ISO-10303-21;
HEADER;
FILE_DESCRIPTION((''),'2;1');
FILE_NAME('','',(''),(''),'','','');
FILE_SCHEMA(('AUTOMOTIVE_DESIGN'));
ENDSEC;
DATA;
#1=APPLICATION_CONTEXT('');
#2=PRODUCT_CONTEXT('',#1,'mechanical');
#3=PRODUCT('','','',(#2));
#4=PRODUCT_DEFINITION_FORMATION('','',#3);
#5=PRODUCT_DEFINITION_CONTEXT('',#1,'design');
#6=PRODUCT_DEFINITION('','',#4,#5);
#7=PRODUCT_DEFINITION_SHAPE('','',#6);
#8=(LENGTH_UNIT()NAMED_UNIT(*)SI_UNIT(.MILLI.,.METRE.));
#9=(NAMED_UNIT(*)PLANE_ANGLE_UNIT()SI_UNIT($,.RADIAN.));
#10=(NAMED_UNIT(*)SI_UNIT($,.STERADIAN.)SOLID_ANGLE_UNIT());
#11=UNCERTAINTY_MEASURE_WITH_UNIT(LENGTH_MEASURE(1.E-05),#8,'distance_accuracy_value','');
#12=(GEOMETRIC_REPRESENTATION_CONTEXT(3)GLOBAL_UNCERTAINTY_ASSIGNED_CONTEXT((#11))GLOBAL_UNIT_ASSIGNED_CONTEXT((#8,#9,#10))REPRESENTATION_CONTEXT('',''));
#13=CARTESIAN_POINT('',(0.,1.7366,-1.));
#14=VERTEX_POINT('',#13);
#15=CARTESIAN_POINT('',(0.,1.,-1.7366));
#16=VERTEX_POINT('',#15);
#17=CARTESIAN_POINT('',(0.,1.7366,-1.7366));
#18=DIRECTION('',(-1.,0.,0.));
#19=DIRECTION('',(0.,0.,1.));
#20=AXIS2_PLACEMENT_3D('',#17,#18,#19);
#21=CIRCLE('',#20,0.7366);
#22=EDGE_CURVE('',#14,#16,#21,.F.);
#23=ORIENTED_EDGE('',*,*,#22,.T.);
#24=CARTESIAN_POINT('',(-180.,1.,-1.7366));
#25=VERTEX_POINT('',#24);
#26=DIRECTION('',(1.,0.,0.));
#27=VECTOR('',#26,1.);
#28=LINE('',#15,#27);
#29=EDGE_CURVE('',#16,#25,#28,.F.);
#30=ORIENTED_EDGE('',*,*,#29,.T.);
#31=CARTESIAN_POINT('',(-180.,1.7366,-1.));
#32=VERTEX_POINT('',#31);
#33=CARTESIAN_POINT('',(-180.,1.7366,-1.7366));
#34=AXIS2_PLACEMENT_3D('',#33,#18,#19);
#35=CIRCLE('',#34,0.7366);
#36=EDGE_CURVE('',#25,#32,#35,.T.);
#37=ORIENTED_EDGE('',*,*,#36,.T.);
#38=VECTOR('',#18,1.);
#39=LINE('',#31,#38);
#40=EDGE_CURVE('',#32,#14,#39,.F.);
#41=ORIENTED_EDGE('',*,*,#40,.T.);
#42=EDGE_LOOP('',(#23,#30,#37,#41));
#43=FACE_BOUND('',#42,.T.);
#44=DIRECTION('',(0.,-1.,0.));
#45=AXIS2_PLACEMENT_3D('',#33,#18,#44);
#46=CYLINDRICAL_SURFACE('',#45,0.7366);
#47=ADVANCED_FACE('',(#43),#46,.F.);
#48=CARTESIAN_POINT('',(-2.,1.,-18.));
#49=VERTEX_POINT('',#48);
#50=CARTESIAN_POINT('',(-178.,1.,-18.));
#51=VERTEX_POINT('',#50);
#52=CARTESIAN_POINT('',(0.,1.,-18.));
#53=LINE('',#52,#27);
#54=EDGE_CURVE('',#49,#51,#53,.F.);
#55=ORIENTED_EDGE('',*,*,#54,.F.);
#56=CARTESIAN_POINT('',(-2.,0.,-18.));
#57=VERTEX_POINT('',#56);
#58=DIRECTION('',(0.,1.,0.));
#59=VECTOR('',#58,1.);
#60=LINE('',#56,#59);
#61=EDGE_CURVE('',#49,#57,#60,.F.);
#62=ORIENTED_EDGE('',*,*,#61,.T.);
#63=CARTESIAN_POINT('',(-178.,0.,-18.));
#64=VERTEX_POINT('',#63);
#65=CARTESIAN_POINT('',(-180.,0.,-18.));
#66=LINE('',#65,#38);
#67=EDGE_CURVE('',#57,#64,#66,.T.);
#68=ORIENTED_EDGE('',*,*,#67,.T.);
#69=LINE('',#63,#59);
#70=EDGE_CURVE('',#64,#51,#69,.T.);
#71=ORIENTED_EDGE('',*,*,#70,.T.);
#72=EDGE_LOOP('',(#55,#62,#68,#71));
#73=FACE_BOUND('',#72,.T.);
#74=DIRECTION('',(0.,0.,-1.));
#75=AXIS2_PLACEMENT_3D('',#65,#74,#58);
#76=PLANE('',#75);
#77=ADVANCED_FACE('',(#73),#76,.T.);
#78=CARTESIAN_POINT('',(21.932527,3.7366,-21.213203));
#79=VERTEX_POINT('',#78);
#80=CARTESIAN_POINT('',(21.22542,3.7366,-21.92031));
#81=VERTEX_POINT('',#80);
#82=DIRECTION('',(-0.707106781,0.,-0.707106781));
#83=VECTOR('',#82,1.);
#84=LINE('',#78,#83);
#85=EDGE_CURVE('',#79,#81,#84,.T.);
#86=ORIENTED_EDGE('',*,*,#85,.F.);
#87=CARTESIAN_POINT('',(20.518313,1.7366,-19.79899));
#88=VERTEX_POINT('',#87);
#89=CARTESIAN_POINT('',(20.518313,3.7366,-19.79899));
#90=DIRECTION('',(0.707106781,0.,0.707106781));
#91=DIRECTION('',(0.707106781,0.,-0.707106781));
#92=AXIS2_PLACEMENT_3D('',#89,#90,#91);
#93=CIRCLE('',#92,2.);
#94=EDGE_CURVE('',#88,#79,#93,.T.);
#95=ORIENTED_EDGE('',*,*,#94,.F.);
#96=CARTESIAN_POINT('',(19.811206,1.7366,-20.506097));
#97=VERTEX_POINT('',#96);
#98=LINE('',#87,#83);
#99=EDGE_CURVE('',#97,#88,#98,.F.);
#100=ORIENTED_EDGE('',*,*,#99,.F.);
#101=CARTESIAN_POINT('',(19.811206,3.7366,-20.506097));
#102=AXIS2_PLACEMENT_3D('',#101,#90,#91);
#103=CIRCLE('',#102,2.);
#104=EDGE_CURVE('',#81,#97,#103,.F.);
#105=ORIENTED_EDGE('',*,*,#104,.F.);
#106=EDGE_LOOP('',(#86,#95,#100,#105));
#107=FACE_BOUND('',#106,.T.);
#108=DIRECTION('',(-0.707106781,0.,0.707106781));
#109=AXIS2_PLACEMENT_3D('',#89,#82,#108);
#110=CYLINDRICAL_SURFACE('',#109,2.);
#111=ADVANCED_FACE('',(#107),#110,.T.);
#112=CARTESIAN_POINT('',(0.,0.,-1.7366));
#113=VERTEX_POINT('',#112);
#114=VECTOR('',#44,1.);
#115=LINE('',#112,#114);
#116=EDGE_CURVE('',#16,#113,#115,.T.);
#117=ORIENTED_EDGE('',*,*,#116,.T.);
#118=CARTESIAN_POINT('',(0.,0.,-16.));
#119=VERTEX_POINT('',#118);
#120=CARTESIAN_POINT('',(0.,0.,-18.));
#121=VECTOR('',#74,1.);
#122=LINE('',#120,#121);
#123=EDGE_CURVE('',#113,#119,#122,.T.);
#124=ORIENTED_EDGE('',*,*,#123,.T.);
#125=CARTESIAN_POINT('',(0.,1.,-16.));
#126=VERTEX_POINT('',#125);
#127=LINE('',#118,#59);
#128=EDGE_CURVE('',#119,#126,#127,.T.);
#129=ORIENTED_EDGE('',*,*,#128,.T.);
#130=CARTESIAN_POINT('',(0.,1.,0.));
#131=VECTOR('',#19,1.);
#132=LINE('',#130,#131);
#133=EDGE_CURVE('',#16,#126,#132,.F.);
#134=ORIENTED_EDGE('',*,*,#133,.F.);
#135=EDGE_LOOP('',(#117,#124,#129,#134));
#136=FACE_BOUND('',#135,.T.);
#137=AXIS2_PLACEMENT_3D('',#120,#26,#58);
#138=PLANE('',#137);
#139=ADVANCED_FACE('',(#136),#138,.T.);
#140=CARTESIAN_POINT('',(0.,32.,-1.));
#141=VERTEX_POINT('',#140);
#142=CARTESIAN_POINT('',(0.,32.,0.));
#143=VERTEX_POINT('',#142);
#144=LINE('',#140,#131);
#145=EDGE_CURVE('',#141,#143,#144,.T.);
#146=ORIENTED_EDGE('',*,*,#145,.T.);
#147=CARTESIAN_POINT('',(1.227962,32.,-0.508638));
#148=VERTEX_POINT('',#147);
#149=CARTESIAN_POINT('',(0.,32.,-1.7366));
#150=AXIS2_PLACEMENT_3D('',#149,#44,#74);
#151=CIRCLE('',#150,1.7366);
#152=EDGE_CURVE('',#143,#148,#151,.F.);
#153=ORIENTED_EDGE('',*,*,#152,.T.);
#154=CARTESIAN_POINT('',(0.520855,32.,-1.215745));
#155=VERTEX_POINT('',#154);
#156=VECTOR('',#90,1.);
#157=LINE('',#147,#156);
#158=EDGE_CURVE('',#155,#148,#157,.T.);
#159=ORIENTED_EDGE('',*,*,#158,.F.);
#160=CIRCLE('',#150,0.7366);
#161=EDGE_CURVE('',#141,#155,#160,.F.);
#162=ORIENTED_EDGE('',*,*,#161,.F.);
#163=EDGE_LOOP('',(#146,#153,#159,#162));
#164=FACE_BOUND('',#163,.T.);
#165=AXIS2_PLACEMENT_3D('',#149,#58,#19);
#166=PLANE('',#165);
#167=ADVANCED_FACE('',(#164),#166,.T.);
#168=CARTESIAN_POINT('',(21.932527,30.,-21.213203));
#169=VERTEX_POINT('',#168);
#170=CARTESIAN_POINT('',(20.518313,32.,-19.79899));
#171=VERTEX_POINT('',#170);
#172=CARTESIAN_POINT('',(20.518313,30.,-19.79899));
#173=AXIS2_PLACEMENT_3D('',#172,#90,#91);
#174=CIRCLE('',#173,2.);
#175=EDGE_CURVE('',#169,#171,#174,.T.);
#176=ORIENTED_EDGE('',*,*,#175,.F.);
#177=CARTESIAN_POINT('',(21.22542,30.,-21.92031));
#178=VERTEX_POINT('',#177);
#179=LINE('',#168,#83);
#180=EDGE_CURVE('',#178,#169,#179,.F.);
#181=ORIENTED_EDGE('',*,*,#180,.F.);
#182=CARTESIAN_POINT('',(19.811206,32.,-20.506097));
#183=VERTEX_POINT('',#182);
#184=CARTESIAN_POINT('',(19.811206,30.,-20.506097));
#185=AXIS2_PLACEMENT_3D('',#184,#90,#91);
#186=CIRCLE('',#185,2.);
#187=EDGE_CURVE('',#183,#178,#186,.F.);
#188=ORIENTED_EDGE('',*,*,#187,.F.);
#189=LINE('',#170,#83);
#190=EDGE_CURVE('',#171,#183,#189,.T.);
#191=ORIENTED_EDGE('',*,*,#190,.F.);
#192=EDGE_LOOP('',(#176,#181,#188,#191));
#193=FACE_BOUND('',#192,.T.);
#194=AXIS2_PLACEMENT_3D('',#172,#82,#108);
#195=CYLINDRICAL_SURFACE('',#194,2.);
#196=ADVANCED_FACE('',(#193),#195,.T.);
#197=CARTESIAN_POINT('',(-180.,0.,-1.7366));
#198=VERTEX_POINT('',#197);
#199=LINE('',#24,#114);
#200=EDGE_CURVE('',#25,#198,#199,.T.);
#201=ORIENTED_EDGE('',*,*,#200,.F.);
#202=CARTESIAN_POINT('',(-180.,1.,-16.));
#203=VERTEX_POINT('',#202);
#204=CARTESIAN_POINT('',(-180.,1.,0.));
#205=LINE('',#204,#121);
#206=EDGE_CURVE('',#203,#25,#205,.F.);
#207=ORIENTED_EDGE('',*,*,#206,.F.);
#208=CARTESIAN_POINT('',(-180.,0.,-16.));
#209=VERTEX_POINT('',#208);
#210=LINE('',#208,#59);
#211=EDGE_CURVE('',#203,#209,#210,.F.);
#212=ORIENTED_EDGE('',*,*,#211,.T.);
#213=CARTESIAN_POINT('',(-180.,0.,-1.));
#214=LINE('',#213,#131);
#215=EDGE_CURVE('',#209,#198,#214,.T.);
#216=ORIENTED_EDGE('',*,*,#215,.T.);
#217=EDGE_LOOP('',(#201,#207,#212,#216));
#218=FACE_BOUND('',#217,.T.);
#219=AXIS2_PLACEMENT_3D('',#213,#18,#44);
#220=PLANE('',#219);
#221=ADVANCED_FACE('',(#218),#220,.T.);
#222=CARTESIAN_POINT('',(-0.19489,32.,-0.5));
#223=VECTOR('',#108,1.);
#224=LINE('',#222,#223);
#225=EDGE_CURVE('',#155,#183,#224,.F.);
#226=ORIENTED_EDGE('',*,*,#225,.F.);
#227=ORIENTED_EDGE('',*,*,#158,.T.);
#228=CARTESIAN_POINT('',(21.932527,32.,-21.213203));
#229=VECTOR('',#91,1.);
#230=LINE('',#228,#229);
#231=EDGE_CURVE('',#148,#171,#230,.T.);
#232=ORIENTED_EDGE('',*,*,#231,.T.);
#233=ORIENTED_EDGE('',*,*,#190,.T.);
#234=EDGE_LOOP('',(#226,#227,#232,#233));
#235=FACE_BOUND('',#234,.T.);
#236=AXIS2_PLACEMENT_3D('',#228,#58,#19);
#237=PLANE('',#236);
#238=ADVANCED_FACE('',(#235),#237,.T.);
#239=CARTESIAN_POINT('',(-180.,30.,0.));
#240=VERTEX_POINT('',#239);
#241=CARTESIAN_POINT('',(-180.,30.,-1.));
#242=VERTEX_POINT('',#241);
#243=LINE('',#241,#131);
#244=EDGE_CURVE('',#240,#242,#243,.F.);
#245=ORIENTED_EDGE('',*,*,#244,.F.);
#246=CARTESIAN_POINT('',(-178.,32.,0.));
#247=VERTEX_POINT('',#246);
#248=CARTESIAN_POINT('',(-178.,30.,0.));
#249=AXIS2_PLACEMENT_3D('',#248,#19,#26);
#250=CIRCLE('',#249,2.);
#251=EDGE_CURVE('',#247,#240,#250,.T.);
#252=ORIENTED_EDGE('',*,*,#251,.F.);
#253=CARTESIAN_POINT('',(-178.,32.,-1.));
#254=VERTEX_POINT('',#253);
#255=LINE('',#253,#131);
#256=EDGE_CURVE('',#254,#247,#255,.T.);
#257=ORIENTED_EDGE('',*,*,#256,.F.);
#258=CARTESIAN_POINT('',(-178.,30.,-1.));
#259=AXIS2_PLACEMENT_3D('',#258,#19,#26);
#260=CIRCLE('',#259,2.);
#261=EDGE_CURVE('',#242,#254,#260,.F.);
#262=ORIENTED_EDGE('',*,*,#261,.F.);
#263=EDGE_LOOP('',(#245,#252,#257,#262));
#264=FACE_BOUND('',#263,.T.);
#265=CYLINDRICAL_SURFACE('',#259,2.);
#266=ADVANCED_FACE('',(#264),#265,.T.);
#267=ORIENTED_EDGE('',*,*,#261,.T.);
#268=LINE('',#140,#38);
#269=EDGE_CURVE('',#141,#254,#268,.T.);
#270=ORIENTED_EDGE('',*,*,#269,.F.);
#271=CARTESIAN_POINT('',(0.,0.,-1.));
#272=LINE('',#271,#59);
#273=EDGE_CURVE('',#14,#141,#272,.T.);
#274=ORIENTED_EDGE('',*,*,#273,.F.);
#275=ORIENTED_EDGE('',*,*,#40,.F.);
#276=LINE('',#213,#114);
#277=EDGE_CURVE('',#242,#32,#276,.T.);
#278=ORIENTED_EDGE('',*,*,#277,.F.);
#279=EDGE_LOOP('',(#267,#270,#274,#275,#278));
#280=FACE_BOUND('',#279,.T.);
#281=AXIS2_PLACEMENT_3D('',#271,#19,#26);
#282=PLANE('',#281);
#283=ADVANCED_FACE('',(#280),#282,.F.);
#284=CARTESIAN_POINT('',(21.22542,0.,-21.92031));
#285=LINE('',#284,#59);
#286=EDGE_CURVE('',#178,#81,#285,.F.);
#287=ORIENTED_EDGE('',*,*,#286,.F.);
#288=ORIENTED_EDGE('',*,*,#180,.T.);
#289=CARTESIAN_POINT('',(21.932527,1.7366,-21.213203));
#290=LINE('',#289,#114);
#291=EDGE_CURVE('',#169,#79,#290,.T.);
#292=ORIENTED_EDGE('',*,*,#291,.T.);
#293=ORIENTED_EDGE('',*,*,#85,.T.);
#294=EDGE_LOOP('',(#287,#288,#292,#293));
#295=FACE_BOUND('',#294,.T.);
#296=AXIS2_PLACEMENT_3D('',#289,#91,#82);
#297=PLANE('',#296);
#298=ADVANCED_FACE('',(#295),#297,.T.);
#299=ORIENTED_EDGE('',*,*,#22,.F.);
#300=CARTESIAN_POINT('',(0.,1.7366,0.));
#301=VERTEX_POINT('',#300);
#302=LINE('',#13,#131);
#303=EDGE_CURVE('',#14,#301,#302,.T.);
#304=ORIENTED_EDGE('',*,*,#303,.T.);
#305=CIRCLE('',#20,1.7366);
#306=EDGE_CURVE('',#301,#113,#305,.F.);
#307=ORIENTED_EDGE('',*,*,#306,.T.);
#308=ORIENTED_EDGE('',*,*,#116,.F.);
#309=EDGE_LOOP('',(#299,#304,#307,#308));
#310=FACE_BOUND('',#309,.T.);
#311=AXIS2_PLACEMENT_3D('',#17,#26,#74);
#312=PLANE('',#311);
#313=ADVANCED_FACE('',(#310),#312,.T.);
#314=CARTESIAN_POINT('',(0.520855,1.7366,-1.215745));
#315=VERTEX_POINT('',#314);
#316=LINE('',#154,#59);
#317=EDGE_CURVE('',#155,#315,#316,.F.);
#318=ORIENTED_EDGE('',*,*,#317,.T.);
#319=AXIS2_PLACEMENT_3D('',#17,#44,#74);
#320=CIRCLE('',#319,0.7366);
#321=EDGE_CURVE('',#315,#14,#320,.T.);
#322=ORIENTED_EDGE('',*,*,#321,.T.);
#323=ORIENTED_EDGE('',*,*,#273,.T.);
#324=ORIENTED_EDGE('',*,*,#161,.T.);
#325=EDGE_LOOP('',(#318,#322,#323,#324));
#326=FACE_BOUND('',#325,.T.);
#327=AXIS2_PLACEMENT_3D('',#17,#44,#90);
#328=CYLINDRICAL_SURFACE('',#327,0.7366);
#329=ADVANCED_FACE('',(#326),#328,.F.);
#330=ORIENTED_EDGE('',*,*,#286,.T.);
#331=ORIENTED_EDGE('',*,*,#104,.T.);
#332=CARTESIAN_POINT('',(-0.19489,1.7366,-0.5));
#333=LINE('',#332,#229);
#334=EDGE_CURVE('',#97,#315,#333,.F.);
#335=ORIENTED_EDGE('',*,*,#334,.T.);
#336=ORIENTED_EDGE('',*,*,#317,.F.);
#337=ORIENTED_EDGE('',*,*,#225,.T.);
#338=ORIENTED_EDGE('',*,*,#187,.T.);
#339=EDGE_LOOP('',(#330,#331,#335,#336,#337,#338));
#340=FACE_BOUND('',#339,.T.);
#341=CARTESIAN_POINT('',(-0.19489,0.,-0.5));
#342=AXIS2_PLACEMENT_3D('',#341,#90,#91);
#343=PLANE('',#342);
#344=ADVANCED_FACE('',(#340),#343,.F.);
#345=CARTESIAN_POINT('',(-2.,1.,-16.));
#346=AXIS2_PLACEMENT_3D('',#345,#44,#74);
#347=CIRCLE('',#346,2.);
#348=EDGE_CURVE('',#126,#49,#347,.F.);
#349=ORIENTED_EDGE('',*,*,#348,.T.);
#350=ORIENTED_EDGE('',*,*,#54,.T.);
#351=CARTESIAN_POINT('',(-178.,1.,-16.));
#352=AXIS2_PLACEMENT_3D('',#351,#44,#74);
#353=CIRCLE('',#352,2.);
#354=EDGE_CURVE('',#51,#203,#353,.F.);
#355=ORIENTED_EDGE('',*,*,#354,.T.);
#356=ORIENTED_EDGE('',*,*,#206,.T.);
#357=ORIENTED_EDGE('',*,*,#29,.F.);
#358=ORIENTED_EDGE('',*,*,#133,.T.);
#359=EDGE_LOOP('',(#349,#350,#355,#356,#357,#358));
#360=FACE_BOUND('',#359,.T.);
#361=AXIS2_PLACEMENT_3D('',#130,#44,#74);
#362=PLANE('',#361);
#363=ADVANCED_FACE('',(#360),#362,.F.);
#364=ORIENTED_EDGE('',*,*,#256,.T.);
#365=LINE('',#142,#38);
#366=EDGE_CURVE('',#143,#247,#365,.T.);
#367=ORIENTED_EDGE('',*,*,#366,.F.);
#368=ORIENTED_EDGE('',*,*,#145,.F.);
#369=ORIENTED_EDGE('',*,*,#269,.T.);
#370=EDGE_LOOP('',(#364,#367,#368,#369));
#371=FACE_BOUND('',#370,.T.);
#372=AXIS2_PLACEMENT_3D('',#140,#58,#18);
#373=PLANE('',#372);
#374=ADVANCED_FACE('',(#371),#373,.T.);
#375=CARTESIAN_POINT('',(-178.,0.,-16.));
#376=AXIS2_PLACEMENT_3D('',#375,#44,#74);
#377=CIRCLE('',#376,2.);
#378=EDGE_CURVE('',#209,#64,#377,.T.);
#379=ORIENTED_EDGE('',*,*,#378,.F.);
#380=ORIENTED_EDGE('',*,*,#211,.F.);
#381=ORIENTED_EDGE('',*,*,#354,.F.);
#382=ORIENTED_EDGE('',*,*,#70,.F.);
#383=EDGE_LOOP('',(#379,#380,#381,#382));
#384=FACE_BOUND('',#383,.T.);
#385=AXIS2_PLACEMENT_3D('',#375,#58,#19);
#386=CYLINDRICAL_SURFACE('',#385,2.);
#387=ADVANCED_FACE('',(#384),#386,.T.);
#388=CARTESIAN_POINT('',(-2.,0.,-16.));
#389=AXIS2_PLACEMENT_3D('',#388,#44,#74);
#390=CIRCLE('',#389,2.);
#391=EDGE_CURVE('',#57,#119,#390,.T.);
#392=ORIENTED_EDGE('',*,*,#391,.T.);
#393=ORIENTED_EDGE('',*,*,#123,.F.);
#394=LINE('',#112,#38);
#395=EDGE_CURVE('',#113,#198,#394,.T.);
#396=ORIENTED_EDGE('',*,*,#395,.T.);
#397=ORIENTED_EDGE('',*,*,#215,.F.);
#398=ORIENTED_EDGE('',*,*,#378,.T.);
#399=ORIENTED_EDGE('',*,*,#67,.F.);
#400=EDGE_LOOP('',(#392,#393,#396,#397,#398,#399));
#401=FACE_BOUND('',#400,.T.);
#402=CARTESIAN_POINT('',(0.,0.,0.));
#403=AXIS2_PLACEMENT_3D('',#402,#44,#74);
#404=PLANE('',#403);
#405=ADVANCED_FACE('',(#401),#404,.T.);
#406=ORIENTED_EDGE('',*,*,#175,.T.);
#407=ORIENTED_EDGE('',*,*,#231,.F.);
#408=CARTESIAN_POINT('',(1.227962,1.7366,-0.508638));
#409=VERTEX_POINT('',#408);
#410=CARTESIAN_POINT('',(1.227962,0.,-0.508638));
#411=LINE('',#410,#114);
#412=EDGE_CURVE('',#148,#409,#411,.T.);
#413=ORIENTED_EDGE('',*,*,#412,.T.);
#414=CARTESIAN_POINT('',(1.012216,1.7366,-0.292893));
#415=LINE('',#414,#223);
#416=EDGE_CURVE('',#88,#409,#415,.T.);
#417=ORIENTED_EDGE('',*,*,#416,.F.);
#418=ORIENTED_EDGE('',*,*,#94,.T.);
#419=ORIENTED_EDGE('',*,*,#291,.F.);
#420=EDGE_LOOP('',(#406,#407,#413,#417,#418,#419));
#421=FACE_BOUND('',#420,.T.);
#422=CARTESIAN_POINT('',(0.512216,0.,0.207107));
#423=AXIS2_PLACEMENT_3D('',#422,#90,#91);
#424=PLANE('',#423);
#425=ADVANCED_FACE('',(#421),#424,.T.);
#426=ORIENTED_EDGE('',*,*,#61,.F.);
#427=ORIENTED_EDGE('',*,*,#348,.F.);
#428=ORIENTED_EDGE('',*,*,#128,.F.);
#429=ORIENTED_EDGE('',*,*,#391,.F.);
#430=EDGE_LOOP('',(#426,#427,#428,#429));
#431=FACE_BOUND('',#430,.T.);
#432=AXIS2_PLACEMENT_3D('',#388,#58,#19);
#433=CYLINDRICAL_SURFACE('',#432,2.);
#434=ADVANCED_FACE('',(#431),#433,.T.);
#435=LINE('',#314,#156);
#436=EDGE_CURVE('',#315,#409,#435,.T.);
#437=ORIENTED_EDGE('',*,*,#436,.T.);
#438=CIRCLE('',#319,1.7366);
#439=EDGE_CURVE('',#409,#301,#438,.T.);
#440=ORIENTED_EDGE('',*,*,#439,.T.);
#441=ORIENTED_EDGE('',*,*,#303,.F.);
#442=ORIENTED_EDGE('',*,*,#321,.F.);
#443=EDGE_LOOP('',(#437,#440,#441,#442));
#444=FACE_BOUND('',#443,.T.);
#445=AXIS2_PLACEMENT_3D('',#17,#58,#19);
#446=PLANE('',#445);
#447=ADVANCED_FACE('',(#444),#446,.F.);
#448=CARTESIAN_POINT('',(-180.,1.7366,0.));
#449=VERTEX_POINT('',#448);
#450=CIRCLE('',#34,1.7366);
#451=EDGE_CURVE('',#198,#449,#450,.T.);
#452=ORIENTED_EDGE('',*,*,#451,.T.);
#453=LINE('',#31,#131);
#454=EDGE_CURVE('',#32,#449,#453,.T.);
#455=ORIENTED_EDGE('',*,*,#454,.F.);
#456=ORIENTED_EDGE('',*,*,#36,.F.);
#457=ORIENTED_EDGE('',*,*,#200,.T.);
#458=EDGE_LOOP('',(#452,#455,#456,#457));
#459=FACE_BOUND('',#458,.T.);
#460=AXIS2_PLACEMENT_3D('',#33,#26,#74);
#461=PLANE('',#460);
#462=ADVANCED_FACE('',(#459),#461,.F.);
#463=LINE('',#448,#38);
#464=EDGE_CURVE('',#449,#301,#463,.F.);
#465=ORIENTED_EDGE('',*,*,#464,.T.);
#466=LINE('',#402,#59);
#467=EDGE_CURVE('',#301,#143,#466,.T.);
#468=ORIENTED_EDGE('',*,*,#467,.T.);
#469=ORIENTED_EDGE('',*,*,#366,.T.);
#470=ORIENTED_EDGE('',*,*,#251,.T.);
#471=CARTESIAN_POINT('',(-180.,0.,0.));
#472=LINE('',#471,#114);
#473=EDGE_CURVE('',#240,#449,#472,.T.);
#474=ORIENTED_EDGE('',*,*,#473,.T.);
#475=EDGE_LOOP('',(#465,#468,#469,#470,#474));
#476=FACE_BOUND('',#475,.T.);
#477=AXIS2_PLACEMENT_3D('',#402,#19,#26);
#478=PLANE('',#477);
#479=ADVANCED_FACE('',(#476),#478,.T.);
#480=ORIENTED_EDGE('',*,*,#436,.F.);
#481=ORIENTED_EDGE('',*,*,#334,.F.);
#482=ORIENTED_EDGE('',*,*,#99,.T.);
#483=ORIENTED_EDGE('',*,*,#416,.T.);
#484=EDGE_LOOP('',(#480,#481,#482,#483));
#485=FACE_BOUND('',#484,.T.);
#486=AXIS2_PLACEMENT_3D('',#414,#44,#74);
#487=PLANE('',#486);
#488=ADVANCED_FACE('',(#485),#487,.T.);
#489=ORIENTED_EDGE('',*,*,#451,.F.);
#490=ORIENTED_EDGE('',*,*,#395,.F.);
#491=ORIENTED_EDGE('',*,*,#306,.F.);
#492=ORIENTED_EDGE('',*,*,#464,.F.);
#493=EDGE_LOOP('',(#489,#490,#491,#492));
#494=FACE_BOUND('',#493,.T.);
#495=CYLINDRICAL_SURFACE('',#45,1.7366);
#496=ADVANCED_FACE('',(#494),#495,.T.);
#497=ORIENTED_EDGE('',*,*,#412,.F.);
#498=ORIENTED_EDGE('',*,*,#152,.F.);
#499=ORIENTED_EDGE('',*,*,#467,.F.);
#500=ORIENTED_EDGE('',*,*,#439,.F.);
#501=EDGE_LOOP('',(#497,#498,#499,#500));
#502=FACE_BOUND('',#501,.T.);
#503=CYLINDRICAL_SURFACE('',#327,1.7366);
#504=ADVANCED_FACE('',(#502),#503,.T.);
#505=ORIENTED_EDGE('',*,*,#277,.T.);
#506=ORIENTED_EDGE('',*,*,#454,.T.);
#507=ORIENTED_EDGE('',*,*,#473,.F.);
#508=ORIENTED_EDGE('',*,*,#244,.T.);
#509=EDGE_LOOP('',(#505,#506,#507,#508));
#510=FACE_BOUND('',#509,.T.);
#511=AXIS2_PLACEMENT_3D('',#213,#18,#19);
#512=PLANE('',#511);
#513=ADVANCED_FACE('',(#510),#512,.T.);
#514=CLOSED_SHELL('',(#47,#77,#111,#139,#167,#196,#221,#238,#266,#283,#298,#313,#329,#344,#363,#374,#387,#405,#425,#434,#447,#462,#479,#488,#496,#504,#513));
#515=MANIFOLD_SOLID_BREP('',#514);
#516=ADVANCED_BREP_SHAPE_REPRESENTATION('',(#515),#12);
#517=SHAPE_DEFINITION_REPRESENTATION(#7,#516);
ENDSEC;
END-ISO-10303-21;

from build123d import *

# Parameters (mm, degrees)
SKETCH2_W                    = 180
SKETCH2_H                    = 32
BASE_FLANGE1_DEPTH           = 1
EDGE_FLANGE1_STRIP_W         = 5.4732
EDGE_FLANGE1_STRIP_H         = 1
EDGE_FLANGE1_STRIP_CUT_DEPTH = 180
EDGE_FLANGE1_DEPTH           = 180
EDGE_FLANGE2_DEPTH           = 30.2634
FILLET1_R                    = 2


# Sheet-metal steps are written as plain solids
with BuildPart() as part:
    # Sketch2 → Base-Flange1 (new body)
    with BuildSketch(Plane.XY):
        with Locations((-90, 16)):
            Rectangle(SKETCH2_W, SKETCH2_H)
    extrude(amount=-BASE_FLANGE1_DEPTH)

    # Edge-Flange1 strip (across the edge) → Edge-Flange1 strip cut (cut)
    with BuildSketch(Plane(origin=(0, 0, -1), x_dir=(0, 1, 0), z_dir=(-1, 0, 0))):
        with Locations((-1, -0.5)):
            Rectangle(EDGE_FLANGE1_STRIP_W, EDGE_FLANGE1_STRIP_H)
    extrude(amount=EDGE_FLANGE1_STRIP_CUT_DEPTH, mode=Mode.SUBTRACT)

    # Edge-Flange1 section (across the edge) → Edge-Flange1 (add)
    with BuildSketch(Plane(origin=(0, 0, -1), x_dir=(0, 1, 0), z_dir=(-1, 0, 0))):
        with BuildLine():
            Line((0, 0.7366), (0, 17))
            Line((0, 17), (1, 17))
            Line((1, 17), (1, 0.7366))
            ThreePointArc((1, 0.7366), (1.215745145, 0.215745145), (1.7366, 0))
            Line((1.7366, 0), (1.7366, -1))
            ThreePointArc((1.7366, -1), (0.508638364, -0.491361636), (0, 0.7366))
        make_face()
    extrude(amount=EDGE_FLANGE1_DEPTH)

    # Edge-Flange2 section (across the edge) → Edge-Flange2 (add)
    with BuildSketch(Plane(origin=(0.30510971, 32, -1), x_dir=(-0.7071067811865438, 0, -0.7071067811865512), z_dir=(0, -1, 0))):
        with BuildLine():
            Line((-1, 0.30510971), (-1, 29.585786438))
            Line((-1, 29.585786438), (0, 29.585786438))
            Line((0, 29.585786438), (0, 0.30510971))
            ThreePointArc((0, 0.30510971), (0.056070336, 0.023225094), (0.215745145, -0.215745145))
            Line((0.215745145, -0.215745145), (-0.491361636, -0.922851926))
            ThreePointArc((-0.491361636, -0.922851926), (-0.867809196, -0.359458339), (-1, 0.30510971))
        make_face()
    extrude(amount=EDGE_FLANGE2_DEPTH)

    # Fillet1
    fillet1_edges = [part.edges().sort_by_distance(p)[0] for p in [
        (0, 0.5, -18),
        (-180, 0.5, -18),
        (21.578973317, 32, -21.566756826),
        (21.578973317, 1.7366, -21.566756826),
        (-180, 32, -0.5),
    ]]
    fillet(fillet1_edges, radius=FILLET1_R)


solid = part.part
